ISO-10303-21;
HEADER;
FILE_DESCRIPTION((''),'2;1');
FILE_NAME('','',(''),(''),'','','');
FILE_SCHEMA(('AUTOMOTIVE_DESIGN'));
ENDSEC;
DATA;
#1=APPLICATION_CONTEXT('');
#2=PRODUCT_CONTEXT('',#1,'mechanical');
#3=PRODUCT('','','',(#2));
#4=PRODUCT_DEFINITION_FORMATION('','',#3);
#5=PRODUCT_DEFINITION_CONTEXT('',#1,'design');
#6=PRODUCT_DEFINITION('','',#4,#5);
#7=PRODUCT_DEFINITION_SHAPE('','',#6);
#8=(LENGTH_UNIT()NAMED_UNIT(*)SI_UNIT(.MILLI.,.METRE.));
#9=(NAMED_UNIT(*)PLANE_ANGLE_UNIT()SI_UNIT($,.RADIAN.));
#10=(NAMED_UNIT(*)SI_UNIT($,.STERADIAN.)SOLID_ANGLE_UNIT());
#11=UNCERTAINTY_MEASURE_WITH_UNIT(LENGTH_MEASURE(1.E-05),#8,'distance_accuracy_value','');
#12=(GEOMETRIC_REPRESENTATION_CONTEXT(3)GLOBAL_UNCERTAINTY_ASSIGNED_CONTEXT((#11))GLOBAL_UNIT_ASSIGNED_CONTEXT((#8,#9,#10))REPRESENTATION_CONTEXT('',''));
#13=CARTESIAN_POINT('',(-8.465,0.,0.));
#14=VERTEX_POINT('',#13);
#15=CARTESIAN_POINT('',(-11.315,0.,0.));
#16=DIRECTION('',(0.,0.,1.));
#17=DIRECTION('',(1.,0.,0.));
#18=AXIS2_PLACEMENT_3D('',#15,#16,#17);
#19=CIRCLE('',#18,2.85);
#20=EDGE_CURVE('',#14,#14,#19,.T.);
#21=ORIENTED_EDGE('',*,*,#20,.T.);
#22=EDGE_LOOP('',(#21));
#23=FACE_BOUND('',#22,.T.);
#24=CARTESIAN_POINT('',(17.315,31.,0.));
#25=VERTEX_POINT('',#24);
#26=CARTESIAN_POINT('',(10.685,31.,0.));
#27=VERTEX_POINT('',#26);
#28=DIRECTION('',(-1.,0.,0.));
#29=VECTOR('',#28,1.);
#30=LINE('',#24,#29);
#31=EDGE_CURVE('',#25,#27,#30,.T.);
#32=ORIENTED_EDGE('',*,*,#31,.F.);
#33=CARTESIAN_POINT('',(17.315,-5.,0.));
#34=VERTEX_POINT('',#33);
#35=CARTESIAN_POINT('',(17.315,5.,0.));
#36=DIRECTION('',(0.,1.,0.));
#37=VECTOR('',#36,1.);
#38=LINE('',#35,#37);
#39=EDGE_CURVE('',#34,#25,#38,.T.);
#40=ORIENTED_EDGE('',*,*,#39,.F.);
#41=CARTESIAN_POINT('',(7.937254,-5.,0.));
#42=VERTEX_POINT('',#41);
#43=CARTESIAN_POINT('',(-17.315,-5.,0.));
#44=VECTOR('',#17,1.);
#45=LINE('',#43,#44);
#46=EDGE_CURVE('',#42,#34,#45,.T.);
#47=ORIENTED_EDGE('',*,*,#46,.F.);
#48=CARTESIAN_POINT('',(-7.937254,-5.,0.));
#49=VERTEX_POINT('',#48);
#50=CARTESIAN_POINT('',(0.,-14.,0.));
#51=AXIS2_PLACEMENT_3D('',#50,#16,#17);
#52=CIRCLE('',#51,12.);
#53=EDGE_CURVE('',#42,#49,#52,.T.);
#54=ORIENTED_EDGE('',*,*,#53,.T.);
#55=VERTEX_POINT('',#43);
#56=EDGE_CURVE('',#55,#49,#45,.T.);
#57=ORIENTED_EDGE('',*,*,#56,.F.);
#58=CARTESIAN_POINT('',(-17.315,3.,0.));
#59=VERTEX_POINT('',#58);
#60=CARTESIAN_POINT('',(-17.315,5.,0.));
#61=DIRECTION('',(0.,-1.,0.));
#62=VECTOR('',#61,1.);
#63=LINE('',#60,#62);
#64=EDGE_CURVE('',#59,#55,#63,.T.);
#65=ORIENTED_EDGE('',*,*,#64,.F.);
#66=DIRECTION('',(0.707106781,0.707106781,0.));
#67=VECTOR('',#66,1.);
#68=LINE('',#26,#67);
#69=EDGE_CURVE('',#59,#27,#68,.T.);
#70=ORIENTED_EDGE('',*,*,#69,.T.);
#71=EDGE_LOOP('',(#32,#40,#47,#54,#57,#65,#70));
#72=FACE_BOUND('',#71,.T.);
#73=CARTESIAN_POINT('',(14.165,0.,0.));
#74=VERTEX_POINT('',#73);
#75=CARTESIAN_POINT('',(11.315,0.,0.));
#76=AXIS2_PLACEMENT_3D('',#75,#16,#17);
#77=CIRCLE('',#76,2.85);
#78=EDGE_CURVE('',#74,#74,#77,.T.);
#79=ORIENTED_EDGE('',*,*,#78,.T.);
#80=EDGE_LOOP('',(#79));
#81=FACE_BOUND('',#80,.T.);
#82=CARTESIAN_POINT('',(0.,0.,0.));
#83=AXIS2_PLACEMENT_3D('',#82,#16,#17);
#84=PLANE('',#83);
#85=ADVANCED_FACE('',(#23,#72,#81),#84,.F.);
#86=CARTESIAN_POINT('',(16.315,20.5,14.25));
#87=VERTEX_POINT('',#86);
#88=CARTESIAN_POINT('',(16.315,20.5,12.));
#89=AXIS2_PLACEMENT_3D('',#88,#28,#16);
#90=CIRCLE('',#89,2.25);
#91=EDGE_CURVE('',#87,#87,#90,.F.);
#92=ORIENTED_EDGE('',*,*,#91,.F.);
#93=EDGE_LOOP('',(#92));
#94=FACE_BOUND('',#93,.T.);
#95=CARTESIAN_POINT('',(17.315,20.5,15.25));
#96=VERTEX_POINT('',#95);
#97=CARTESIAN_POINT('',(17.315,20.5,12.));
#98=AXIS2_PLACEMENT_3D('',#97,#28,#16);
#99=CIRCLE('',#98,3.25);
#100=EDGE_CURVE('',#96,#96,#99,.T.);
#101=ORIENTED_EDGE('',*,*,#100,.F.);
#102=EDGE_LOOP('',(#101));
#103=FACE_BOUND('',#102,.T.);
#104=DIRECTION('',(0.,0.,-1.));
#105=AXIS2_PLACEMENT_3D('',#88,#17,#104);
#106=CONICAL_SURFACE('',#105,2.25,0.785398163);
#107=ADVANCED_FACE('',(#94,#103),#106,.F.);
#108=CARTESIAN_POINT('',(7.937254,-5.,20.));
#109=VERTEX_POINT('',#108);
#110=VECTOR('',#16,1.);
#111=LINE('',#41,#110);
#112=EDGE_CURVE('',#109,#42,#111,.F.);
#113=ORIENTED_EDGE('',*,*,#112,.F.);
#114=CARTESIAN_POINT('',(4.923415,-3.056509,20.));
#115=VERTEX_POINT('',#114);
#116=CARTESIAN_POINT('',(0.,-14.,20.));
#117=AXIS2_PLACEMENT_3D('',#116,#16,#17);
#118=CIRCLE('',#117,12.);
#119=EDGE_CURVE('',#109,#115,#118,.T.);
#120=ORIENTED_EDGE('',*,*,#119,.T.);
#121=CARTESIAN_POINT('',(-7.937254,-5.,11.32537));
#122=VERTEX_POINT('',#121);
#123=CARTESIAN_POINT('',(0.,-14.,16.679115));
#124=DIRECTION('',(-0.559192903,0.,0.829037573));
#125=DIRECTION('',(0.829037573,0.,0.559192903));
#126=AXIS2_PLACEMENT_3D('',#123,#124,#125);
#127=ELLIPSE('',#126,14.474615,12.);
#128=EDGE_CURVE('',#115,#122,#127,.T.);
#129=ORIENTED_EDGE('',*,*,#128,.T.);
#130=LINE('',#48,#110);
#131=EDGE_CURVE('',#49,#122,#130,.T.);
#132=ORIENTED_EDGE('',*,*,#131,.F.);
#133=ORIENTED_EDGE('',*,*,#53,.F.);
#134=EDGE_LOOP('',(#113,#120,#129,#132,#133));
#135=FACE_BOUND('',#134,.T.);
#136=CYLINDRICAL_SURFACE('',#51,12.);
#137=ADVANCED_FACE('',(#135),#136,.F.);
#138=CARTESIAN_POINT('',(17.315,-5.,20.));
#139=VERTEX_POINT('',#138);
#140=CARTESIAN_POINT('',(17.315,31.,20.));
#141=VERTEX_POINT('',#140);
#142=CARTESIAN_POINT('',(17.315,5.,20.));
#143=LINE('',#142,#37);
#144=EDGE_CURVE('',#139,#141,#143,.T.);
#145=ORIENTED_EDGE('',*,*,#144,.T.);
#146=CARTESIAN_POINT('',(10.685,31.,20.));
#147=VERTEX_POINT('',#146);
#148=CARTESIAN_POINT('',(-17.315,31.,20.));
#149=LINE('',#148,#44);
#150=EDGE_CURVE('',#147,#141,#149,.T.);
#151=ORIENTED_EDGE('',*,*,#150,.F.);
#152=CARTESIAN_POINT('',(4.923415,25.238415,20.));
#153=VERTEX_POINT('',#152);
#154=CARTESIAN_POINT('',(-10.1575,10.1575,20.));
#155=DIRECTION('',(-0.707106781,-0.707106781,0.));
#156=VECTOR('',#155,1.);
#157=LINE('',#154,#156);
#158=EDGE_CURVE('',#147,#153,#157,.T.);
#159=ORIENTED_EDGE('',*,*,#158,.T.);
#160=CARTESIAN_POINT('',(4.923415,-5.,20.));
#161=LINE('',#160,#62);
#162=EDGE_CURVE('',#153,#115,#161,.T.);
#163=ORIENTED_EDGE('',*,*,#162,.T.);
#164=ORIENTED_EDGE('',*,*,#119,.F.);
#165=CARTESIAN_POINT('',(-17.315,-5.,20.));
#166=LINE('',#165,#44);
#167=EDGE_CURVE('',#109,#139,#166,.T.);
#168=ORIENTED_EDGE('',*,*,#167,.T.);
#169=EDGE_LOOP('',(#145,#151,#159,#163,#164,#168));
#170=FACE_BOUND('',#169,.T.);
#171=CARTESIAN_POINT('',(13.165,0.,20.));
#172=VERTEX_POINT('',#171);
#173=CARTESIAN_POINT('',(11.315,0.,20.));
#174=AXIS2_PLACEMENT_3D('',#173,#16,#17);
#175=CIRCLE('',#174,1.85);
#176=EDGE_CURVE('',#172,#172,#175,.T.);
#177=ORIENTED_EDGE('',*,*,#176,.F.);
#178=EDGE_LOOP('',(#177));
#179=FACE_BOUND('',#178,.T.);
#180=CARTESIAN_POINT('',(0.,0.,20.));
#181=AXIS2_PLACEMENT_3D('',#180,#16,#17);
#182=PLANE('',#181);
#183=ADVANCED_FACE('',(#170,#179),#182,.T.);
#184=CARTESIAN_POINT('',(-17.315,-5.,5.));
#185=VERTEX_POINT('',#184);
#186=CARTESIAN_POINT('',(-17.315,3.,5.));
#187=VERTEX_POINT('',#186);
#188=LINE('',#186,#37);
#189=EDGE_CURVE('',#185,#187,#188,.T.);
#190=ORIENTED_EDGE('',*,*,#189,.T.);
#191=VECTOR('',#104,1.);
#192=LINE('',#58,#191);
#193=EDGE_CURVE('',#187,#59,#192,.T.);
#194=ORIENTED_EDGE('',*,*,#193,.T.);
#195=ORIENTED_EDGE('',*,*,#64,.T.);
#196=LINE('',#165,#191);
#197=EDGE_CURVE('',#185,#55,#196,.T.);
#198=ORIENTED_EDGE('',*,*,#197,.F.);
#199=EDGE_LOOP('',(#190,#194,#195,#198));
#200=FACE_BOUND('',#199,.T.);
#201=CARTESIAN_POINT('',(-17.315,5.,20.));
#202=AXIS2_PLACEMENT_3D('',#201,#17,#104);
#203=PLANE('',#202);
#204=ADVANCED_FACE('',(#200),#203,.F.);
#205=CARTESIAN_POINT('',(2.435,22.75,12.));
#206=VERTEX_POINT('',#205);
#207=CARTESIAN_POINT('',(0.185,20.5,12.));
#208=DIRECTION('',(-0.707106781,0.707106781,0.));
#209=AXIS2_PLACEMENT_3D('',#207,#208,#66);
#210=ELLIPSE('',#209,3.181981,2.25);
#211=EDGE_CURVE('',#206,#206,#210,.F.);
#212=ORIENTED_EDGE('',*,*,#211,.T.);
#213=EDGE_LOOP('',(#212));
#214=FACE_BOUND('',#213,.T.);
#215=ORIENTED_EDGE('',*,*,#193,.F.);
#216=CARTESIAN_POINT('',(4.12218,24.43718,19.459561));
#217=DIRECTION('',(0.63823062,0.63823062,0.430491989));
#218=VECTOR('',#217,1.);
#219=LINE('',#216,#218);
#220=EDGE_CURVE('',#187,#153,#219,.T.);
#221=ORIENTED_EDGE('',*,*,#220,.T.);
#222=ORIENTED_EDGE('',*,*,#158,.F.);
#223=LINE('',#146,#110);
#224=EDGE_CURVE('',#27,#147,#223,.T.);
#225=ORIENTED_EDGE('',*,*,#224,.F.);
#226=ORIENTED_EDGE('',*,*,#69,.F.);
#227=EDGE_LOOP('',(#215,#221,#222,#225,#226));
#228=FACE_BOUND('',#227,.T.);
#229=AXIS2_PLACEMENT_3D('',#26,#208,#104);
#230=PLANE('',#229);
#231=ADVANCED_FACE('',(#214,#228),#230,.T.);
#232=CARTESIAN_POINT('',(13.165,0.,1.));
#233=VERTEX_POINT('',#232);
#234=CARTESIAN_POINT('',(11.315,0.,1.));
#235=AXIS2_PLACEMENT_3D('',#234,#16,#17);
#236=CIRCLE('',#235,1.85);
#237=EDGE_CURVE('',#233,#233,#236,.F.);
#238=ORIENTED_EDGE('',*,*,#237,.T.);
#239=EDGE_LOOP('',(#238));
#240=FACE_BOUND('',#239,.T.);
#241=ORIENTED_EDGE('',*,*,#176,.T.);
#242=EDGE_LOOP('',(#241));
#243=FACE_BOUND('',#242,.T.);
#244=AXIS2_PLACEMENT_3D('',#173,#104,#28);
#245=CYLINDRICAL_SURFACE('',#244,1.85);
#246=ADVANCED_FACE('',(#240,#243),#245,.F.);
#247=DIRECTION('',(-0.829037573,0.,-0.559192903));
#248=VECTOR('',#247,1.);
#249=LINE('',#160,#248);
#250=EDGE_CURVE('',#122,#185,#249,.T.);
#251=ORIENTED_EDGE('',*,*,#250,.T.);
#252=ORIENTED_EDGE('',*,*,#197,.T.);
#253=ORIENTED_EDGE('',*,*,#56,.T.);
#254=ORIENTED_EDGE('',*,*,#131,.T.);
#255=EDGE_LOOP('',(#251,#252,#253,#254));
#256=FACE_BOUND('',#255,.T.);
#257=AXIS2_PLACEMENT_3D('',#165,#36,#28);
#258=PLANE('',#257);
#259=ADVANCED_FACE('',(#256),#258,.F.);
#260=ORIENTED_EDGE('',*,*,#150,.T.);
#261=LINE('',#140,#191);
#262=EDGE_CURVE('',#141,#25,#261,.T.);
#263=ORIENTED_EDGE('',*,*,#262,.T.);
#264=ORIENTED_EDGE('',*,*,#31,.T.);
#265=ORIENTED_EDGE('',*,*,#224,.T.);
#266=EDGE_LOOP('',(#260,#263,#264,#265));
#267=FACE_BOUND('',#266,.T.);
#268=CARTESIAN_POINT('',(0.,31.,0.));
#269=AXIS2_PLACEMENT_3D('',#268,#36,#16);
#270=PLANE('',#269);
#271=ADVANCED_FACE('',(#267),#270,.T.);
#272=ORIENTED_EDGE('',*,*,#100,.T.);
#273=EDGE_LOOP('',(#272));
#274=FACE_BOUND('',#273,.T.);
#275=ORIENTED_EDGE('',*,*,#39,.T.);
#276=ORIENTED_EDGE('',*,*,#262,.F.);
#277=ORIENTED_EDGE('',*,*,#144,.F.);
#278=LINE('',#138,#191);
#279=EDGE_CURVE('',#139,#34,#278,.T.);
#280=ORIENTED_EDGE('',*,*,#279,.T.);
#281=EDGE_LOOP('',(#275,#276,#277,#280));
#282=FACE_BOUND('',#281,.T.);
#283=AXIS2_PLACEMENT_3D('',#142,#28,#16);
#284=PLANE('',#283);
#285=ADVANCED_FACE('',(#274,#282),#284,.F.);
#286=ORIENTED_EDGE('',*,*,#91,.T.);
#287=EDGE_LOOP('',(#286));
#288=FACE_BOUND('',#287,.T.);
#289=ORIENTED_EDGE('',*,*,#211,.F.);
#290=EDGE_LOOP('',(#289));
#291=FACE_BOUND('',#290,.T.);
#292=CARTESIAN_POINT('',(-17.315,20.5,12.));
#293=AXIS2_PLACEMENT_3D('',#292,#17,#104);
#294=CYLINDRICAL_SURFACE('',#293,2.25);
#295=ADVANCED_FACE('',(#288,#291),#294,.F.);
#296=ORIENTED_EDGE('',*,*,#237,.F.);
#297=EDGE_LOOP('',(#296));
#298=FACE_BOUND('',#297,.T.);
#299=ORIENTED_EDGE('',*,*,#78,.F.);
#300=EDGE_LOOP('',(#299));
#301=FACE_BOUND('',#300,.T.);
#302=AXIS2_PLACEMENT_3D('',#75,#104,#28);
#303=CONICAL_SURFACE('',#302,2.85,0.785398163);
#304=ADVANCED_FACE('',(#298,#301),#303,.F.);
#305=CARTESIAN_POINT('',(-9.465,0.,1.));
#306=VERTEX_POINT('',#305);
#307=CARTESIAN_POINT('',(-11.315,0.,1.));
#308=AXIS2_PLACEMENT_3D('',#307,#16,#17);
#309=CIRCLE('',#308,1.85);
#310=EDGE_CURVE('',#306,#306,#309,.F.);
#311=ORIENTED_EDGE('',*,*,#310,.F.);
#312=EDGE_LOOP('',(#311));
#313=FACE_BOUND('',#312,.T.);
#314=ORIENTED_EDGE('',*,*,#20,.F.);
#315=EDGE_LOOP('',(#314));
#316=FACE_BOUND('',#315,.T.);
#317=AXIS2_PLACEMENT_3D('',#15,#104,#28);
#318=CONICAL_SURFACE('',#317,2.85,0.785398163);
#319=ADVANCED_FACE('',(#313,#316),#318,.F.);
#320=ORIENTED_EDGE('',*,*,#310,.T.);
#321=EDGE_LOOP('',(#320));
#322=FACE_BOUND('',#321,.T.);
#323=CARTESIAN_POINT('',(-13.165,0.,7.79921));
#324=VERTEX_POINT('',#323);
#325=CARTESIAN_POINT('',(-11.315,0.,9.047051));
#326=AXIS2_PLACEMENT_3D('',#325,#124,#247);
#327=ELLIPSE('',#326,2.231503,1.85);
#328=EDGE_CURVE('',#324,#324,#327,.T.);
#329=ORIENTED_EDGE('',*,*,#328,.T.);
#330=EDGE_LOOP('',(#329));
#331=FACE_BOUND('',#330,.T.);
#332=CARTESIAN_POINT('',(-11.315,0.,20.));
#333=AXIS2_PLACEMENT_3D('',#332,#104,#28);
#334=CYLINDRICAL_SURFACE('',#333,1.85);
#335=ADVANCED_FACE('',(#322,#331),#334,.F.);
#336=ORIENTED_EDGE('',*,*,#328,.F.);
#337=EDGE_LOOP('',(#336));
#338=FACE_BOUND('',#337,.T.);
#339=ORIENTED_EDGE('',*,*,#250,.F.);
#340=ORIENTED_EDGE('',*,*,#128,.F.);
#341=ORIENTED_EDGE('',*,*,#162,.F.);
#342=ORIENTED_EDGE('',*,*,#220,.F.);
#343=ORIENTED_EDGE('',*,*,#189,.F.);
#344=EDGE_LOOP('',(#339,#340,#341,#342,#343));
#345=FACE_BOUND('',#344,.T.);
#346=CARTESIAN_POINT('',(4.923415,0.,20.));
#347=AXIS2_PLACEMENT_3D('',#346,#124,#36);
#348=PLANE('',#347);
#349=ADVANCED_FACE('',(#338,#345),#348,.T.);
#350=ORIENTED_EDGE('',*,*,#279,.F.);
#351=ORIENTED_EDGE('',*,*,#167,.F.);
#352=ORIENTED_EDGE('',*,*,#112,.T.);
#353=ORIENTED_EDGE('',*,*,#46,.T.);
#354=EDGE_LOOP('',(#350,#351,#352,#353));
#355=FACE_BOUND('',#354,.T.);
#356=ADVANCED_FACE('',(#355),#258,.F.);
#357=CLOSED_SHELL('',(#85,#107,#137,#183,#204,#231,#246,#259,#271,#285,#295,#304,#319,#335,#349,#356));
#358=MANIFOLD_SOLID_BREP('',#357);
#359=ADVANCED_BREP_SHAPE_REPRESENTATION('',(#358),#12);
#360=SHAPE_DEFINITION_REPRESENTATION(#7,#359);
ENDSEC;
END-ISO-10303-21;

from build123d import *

# Parameters (mm, degrees)
SKETCH1_W           = 34.63
SKETCH1_H           = 10
SKETCH1_R           = 1.85
BOSS_EXTRUDE1_DEPTH = 20
CHAMFER1_SIZE       = 1
SKETCH2_R           = 12
CUT_EXTRUDE1_DEPTH  = 27.9222812
BOSS_EXTRUDE2_DEPTH = 26
SKETCH5_R           = 2.25
CUT_EXTRUDE3_DEPTH  = 51.598783582
CHAMFER2_SIZE       = 1
CHAMFER3_SIZE       = 28
CHAMFER4_SIZE       = 22.238414528
CHAMFER4_SIZE_2     = 15


with BuildPart() as part:
    # Sketch1 → Boss-Extrude1 (new body)
    with BuildSketch(Plane.XY):
        Rectangle(SKETCH1_W, SKETCH1_H)
        with Locations((-11.315, 0)):
            Circle(SKETCH1_R, mode=Mode.SUBTRACT)
        with Locations((11.315, 0)):
            Circle(SKETCH1_R, mode=Mode.SUBTRACT)
    extrude(amount=BOSS_EXTRUDE1_DEPTH)

    # Chamfer1
    chamfer1_edges = [part.edges().sort_by_distance(p)[0] for p in [
        (-13.165, 0, 0),
        (9.465, 0, 0),
    ]]
    chamfer(chamfer1_edges, length=CHAMFER1_SIZE)

    # Sketch2 → Cut-Extrude1 (cut, through all)
    with BuildSketch(Plane.XY.offset(20)):
        with Locations((0, -14)):
            Circle(SKETCH2_R)
    extrude(amount=-CUT_EXTRUDE1_DEPTH, mode=Mode.SUBTRACT)

    # Sketch3 → Boss-Extrude2 (add)
    with BuildSketch(Plane(origin=(0, 5, 0), x_dir=(1, 0, 0), z_dir=(0, 1, 0))):
        Polygon((-17.315, 0), (-17.315, -20), (11.315, -20), (17.315, -20), (17.315, 0), align=None)
    extrude(amount=BOSS_EXTRUDE2_DEPTH)

    # Sketch5 → Cut-Extrude3 (cut, through all)
    with BuildSketch(Plane(origin=(17.315, 0, 0), x_dir=(0, 0, -1), z_dir=(1, 0, 0))):
        with Locations((-12, 20.5)):
            Circle(SKETCH5_R)
    extrude(amount=-CUT_EXTRUDE3_DEPTH, mode=Mode.SUBTRACT)

    # Chamfer2
    chamfer2_edges = [part.edges().sort_by_distance(p)[0] for p in [
        (17.315, 20.5, 14.25),
    ]]
    chamfer(chamfer2_edges, length=CHAMFER2_SIZE)

    # Chamfer3
    # the kernel refuses this chamfer: 28 mm, written as the material it takes off along each edge
    with BuildSketch(Plane(origin=(-17.315, 31, -72.007123663), x_dir=(0.9996219169112968, 0.027495876610586365, 0), z_dir=(0, 0, 1))) as chamfer3_piece_1:
        Polygon((CHAMFER3_SIZE * 0.999621916911, -CHAMFER3_SIZE * 0.0274958766106), (-CHAMFER3_SIZE * 0.0274958766106, -CHAMFER3_SIZE * 0.999621916911), (0, 0), align=None)
    extrude(amount=164.014247326, mode=Mode.SUBTRACT)

    # Chamfer4
    # the kernel refuses this chamfer: 22.238414528, 15 mm, written as the material it takes off along each edge
    with BuildSketch(Plane(origin=(-17.315, 60.453144221, 20), x_dir=(0.9997657259302418, 0, 0.021644705014774085), z_dir=(0, -1, 0))) as chamfer4_piece_1:
        Polygon((CHAMFER4_SIZE * 0.999765725916, -CHAMFER4_SIZE * 0.0216447050145), (-CHAMFER4_SIZE_2 * 0.0216447050148, -CHAMFER4_SIZE_2 * 0.99976572593), (0, 0), align=None)
    extrude(amount=122.906288442, mode=Mode.SUBTRACT)


solid = part.part
